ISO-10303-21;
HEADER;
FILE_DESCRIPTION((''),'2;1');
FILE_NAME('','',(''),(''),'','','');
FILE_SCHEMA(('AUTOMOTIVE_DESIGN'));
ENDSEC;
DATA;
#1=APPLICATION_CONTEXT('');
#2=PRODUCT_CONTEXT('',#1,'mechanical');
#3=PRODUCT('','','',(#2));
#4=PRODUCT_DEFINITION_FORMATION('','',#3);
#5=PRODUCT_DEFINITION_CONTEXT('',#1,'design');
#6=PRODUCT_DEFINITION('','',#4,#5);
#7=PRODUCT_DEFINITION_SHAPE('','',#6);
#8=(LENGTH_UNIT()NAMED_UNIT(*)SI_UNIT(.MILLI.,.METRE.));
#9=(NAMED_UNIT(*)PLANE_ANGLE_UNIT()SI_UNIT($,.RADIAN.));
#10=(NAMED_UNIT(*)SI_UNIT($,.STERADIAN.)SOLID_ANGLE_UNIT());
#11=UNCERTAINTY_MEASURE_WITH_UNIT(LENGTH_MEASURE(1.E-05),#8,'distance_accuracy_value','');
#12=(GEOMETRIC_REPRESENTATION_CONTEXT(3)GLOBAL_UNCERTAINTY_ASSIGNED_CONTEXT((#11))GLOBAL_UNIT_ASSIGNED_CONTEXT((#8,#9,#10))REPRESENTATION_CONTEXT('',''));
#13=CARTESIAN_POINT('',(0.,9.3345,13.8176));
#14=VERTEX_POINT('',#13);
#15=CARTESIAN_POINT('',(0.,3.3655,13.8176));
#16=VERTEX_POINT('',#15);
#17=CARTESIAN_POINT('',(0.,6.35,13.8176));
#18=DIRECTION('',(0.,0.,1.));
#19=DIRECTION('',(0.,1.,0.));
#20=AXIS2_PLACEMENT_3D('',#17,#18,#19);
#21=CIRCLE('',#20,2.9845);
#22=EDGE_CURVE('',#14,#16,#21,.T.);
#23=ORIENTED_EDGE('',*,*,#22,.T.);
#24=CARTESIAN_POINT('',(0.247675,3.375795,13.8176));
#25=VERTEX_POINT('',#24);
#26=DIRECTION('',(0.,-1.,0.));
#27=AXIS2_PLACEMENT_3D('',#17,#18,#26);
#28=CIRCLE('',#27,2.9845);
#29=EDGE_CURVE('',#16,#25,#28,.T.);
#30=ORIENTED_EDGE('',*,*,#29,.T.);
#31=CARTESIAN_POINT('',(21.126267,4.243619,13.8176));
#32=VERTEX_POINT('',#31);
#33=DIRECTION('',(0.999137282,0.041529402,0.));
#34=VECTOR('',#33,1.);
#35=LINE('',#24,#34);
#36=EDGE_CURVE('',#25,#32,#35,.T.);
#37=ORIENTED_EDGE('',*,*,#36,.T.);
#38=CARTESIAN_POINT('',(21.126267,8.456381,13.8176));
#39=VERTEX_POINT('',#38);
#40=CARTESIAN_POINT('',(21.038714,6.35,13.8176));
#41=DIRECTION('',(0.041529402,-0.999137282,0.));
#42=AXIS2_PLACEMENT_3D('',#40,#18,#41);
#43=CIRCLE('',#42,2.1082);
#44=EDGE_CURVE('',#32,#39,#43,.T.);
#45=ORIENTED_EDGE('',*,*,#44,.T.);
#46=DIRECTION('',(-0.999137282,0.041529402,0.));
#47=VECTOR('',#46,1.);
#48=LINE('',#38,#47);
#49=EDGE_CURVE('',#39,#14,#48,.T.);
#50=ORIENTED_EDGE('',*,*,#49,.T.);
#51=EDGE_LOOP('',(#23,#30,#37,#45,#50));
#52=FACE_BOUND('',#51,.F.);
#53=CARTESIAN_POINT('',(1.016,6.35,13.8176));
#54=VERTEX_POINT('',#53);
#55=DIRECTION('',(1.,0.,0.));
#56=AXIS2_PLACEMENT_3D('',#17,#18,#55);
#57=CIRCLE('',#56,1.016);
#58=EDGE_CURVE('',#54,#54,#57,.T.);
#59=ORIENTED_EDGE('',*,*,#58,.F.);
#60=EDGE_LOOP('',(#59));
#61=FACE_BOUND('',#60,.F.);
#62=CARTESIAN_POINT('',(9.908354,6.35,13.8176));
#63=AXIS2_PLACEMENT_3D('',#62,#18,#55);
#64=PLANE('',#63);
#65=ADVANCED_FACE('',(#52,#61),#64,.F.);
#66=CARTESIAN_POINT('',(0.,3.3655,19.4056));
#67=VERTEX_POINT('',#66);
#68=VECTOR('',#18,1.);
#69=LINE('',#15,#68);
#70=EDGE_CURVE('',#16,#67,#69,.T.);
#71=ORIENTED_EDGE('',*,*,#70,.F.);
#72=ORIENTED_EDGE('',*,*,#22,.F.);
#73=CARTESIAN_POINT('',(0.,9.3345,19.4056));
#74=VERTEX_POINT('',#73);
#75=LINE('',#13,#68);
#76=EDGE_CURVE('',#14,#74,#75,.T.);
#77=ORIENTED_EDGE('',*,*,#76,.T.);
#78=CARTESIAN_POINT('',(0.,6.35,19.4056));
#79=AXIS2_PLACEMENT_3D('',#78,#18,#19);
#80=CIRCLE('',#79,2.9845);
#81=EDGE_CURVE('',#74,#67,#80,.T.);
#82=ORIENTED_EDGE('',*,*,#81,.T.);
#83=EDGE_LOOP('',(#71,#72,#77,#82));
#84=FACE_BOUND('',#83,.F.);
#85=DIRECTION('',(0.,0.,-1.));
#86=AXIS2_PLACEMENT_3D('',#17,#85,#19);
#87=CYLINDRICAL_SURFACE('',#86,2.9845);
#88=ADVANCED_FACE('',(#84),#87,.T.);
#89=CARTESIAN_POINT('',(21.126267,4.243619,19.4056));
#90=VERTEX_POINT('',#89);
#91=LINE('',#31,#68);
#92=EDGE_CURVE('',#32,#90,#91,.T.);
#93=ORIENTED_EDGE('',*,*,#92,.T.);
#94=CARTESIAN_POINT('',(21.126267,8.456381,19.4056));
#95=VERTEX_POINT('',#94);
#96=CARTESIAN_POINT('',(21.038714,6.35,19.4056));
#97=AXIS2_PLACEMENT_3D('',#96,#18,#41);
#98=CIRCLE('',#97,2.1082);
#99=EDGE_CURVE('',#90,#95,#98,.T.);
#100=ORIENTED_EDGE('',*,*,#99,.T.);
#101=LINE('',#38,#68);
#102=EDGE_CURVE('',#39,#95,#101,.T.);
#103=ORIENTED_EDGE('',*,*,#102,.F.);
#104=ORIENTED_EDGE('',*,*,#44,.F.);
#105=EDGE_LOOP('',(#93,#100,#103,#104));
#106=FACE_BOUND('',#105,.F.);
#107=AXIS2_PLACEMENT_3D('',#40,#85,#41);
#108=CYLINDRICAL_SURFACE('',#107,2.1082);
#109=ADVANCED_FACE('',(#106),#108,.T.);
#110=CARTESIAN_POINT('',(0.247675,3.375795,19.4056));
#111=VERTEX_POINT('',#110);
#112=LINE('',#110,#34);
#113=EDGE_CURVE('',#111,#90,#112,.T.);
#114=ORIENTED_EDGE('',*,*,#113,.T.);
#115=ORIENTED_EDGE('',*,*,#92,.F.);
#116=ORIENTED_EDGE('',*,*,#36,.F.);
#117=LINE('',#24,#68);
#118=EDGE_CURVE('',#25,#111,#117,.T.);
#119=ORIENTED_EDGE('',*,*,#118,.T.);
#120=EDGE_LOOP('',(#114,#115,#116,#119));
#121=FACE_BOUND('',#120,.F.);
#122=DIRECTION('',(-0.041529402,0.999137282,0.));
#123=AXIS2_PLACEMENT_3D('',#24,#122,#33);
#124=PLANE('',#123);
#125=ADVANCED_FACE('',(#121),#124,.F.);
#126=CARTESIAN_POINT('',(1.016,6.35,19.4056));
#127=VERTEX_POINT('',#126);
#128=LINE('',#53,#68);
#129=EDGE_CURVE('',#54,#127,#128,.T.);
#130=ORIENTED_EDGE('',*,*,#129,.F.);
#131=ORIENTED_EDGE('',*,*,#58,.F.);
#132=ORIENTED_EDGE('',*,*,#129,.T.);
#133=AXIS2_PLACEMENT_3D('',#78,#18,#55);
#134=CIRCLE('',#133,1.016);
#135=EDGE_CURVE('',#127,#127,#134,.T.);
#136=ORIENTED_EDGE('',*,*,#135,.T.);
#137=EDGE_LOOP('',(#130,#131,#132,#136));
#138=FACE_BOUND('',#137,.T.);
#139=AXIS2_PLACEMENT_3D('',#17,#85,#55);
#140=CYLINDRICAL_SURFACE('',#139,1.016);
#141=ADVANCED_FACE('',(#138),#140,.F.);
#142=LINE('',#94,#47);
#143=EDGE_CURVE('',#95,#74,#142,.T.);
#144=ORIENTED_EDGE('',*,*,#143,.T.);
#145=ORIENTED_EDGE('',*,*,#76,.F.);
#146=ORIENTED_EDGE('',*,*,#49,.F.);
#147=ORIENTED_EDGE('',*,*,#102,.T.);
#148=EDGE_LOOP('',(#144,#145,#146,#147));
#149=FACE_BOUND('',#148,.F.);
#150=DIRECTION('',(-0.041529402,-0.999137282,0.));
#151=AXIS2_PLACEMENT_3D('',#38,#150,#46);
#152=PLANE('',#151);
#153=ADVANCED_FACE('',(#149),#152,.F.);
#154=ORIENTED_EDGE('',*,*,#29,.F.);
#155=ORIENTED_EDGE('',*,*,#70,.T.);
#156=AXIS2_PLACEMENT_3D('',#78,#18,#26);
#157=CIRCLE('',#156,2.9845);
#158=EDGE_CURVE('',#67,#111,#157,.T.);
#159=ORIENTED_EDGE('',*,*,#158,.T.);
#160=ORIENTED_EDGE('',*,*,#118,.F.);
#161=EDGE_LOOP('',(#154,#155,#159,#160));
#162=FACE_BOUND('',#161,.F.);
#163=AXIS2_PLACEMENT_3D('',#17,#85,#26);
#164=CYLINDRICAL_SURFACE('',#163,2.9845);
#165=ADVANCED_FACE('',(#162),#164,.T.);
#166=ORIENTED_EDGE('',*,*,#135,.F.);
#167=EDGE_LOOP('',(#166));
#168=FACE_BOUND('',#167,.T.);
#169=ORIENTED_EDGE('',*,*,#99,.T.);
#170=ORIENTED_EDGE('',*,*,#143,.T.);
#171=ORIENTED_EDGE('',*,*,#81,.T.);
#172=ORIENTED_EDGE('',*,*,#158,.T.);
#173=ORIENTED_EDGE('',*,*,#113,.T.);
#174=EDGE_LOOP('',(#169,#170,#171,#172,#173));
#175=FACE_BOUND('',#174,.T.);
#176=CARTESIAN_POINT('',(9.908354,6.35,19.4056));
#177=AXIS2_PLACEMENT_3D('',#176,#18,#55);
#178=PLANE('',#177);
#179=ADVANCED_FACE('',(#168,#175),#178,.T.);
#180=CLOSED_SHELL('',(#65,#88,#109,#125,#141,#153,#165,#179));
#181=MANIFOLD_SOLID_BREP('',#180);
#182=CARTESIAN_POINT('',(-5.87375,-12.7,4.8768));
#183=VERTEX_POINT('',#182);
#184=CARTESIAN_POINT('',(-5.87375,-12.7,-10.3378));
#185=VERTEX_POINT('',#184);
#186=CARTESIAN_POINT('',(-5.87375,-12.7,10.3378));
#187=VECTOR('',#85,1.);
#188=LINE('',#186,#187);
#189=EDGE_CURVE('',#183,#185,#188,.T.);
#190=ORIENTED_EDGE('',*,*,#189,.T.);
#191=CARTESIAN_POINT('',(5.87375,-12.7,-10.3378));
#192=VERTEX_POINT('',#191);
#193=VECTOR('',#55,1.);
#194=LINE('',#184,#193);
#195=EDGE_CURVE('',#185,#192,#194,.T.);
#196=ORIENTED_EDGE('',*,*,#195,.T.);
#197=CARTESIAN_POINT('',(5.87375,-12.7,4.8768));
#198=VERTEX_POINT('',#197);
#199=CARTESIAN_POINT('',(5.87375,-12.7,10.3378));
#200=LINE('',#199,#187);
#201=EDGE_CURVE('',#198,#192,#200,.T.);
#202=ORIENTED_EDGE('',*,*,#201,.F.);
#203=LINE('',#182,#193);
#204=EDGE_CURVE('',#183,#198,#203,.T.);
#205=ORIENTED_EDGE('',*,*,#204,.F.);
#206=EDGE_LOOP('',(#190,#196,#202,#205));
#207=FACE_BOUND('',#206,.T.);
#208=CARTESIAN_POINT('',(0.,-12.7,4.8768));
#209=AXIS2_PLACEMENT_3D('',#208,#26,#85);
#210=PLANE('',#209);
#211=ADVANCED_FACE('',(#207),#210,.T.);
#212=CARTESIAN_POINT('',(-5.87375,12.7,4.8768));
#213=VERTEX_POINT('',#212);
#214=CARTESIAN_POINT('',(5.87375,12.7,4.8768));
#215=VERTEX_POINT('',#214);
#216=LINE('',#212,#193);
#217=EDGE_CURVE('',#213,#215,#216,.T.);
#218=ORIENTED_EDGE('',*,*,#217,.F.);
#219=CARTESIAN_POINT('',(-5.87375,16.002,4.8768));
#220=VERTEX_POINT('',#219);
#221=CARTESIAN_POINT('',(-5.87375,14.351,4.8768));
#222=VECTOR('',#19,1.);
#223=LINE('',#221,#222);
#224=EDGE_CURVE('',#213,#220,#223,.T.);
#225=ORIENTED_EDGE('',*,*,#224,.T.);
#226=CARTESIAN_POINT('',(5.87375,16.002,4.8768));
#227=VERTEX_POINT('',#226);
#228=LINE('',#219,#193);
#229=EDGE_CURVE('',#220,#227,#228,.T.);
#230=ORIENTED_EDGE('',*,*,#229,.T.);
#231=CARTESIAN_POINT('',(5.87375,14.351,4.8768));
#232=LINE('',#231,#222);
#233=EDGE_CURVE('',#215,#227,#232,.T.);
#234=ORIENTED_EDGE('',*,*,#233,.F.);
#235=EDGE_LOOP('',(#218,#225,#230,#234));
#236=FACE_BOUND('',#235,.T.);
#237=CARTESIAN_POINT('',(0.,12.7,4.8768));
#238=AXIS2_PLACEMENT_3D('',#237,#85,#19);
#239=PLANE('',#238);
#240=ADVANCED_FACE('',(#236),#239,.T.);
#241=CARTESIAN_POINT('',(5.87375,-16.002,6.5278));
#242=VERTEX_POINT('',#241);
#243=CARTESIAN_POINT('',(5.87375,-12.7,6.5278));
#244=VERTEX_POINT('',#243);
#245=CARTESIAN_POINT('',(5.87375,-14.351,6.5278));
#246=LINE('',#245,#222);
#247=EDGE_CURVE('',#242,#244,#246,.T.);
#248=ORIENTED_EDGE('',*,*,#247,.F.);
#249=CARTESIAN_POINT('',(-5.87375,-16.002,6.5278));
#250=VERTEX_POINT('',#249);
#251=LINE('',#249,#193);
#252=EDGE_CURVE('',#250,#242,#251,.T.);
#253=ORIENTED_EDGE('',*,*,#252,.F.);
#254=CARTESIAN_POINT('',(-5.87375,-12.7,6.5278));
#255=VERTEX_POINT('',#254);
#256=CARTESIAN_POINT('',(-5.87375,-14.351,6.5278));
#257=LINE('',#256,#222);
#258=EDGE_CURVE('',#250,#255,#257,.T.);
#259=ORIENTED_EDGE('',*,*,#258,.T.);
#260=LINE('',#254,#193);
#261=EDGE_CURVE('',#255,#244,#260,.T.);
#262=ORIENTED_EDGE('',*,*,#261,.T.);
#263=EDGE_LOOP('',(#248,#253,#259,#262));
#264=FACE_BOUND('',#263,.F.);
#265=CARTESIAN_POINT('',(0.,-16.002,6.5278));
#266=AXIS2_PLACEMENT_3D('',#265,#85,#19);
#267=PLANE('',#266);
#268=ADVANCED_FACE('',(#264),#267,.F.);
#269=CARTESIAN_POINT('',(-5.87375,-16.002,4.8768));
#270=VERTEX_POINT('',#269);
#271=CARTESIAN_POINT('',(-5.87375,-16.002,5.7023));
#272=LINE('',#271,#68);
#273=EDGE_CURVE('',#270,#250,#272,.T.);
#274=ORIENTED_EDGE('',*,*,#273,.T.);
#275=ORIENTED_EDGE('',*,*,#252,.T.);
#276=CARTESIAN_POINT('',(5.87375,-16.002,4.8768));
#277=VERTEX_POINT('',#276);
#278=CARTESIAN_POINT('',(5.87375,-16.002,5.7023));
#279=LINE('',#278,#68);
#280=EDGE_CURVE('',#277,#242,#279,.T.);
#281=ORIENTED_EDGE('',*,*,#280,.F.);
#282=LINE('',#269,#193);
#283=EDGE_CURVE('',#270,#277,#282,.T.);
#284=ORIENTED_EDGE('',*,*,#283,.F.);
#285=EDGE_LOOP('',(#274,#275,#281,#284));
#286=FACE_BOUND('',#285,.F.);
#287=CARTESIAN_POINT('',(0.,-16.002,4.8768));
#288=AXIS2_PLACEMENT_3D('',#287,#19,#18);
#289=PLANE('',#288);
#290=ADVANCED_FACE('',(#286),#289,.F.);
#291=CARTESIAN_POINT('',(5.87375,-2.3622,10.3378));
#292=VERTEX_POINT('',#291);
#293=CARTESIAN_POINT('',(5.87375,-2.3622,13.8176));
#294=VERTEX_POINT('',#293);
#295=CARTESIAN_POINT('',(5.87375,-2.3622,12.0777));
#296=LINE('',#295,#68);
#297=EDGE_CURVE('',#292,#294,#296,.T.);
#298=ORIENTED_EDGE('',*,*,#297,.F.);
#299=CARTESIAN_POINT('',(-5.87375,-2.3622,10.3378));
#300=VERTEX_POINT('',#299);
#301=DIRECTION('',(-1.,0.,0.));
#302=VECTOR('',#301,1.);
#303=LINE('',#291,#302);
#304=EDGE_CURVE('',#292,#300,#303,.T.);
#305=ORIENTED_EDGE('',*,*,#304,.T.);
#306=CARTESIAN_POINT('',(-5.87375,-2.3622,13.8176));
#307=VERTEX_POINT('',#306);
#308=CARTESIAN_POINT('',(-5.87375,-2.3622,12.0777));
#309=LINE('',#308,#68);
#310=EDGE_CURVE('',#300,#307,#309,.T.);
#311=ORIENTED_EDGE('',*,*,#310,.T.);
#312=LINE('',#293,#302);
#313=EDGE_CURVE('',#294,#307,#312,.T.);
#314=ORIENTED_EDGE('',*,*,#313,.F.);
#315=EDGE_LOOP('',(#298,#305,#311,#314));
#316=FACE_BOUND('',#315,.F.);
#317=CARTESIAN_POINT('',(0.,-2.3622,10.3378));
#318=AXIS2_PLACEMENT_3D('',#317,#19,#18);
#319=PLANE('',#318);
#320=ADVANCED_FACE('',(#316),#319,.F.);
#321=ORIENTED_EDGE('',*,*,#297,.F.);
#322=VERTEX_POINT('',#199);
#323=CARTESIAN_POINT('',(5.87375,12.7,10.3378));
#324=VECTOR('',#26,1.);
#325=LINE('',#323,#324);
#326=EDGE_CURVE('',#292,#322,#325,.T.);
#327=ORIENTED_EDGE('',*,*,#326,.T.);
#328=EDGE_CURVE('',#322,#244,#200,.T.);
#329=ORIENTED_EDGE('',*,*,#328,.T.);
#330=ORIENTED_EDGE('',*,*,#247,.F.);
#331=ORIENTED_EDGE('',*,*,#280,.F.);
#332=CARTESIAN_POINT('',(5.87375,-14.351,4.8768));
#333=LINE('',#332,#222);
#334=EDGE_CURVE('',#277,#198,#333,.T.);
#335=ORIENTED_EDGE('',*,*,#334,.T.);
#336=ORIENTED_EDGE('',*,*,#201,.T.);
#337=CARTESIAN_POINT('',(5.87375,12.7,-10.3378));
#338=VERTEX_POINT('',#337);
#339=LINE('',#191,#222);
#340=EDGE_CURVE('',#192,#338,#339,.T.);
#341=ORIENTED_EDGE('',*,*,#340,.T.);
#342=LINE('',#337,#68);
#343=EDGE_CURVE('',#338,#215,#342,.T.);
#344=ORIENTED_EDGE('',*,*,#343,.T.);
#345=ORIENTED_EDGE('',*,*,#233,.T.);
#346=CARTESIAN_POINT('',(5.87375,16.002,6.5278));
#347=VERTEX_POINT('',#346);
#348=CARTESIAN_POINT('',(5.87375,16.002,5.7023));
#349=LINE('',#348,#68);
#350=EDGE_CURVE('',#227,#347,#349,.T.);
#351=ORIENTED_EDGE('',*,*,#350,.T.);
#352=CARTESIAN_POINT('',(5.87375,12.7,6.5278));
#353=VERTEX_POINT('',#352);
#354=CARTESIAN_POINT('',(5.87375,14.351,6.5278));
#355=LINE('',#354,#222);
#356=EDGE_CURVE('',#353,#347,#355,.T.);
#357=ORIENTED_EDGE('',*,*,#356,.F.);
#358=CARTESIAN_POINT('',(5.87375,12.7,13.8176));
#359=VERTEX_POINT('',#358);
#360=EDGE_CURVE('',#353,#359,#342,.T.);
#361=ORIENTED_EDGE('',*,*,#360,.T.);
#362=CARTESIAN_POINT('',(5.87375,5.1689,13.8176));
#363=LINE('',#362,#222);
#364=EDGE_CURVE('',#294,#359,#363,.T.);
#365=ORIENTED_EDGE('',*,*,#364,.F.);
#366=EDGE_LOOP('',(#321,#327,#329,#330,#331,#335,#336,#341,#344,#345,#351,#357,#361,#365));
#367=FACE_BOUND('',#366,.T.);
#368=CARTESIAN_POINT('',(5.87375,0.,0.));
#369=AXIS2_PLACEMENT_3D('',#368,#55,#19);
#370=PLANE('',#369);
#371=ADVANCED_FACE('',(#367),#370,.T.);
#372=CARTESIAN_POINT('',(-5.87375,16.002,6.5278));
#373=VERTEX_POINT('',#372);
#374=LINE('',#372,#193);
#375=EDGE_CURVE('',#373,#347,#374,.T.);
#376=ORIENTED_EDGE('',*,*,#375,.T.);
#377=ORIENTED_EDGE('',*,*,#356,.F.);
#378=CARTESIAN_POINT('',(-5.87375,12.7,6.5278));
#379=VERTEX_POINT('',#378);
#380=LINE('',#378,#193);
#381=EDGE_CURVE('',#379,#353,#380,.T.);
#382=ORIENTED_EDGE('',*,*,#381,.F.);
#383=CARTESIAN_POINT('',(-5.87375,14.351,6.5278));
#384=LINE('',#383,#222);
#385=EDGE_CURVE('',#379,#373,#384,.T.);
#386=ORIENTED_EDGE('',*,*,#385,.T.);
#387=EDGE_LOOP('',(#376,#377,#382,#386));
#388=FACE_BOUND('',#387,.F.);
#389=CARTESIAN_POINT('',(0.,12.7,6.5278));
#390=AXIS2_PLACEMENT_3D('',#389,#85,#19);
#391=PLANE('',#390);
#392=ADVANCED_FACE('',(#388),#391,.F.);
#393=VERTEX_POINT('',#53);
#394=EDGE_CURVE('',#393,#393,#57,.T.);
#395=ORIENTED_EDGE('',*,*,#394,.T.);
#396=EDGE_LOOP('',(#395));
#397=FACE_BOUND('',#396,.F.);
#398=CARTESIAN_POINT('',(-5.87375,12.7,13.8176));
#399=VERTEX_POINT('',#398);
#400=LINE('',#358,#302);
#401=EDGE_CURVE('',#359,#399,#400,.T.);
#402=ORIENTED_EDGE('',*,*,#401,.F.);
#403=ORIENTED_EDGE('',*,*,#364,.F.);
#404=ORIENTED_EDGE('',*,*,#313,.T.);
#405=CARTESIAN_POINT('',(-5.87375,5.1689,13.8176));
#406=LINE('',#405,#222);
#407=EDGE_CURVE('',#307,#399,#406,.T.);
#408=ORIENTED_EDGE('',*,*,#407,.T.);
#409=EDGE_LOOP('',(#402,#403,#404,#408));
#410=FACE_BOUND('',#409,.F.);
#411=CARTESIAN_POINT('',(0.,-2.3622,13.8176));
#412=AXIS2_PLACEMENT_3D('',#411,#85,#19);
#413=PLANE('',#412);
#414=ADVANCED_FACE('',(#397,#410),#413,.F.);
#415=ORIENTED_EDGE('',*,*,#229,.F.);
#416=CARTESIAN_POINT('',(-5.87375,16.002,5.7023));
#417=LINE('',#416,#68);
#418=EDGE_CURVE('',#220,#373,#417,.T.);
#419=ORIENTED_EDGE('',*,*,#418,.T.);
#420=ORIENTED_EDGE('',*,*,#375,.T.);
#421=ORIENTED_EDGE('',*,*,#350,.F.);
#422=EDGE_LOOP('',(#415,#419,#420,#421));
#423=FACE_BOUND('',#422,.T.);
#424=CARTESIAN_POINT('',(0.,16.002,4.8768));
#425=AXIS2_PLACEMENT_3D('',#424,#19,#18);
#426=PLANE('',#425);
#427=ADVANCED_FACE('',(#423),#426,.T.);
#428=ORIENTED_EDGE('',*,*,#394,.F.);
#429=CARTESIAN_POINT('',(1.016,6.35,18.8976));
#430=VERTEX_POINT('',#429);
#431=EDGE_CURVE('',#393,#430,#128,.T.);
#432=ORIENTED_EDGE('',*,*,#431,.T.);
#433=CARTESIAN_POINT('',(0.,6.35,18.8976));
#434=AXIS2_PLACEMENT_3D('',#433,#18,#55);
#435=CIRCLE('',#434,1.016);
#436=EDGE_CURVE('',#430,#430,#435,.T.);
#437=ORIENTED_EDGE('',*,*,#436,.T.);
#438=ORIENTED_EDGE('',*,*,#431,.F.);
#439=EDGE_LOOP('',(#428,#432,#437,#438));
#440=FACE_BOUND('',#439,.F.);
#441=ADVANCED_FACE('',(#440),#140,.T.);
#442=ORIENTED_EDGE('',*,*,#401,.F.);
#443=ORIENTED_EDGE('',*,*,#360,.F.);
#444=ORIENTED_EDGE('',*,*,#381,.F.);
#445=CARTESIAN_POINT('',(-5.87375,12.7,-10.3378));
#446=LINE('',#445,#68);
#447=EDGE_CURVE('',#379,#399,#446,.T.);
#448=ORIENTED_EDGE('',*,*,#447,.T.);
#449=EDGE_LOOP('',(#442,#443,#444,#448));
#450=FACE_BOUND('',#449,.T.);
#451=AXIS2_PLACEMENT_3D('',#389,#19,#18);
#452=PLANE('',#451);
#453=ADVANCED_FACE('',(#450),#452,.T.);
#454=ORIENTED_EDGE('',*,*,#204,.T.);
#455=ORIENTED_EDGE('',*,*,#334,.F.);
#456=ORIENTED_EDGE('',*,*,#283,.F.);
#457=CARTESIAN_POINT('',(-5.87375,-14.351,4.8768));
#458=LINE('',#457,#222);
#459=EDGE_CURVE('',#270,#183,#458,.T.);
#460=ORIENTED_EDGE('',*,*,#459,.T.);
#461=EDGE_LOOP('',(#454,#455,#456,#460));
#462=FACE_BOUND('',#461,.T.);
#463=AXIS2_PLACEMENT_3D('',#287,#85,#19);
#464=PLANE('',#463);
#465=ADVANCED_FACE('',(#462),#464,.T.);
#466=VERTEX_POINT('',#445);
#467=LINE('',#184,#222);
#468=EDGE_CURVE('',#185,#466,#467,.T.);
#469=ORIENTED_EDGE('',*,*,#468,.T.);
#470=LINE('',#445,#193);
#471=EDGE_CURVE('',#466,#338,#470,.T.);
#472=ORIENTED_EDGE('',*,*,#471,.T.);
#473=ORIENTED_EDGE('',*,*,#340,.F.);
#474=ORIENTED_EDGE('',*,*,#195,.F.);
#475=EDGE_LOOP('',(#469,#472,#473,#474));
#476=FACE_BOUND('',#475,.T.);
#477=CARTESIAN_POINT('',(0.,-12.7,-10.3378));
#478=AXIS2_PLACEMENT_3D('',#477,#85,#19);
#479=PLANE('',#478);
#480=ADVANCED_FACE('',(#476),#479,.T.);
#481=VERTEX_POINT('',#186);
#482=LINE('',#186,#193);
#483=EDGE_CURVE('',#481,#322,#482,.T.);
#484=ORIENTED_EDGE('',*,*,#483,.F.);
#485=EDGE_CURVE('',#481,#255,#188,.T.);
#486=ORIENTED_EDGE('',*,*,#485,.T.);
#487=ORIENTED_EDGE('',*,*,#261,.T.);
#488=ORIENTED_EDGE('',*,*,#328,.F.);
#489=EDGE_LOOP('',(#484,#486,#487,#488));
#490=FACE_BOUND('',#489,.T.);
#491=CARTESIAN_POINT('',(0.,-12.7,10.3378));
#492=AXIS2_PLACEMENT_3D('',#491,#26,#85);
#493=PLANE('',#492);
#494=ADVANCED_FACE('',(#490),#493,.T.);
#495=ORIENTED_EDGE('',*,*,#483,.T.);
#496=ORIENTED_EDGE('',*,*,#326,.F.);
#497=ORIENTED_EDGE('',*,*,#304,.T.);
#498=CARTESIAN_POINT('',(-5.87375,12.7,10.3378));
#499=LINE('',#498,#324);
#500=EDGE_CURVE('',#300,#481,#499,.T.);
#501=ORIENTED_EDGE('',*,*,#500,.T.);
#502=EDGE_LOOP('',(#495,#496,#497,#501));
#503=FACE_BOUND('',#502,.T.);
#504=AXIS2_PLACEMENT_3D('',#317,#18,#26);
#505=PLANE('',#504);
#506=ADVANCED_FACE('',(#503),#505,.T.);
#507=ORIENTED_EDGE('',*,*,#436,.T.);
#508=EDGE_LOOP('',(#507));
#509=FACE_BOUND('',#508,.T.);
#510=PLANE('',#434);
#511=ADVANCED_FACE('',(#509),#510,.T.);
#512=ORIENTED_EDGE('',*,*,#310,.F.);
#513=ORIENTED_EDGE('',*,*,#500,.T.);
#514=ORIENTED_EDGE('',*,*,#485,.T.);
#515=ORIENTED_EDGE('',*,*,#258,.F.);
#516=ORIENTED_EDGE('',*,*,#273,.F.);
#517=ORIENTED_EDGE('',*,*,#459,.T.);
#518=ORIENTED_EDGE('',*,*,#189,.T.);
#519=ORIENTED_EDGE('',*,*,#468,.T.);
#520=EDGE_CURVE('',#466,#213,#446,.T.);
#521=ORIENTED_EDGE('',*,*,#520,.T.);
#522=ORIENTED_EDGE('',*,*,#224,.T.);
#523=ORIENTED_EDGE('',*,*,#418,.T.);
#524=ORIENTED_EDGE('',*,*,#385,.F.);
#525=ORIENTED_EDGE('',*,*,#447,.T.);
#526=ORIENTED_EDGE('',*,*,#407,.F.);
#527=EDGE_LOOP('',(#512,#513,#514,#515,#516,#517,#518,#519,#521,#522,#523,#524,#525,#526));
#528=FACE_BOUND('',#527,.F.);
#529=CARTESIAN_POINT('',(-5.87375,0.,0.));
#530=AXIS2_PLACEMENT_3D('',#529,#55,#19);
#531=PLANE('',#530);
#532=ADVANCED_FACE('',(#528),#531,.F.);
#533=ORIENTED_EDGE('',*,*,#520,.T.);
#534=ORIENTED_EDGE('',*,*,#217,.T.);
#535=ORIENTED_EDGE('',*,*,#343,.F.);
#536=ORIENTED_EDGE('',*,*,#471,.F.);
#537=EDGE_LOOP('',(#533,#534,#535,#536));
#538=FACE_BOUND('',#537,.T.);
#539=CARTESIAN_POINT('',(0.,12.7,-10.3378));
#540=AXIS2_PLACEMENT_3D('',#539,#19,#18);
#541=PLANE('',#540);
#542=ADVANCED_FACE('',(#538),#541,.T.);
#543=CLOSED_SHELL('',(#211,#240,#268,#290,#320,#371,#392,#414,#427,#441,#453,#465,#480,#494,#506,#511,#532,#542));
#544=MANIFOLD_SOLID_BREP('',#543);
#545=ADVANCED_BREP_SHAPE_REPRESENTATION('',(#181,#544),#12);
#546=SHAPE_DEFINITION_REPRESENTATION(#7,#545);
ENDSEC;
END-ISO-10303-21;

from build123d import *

# Parameters (mm, degrees)
F0_W     = 3.302
F0_H     = 1.651
F0_W_2   = 15.0622
F0_H_2   = 3.4798
F1_DEPTH = 5.87375
F2_R     = 1.016
F3_DEPTH = 5.588
F4_DEPTH = 5.08


with BuildPart() as f1:
    # F0 (on Right) → F1 (new body, symmetric)
    with BuildSketch(Plane.YZ):
        Polygon((12.7, 6.5278), (12.7, 10.3378), (-2.3622, 10.3378), (-12.7, 10.3378), (-12.7, 6.5278), (-12.7, 4.8768), (-12.7, -10.3378), (12.7, -10.3378), (12.7, 4.8768), align=None)
        with Locations((-14.351, 5.7023)):
            Rectangle(F0_W, F0_H)
        with Locations((5.1689, 12.0777)):
            Rectangle(F0_W_2, F0_H_2)
        with Locations((14.351, 5.7023)):
            Rectangle(F0_W, F0_H)
    extrude(amount=F1_DEPTH, both=True)

    # F2 (on face) → F4 (join)
    with BuildSketch(Plane.XY.offset(13.8176)):
        with Locations((0, 6.35)):
            Circle(F2_R)
    extrude(amount=F4_DEPTH)


with BuildPart() as f3:
    # F2 (on face) → F3 (new body)
    with BuildSketch(Plane.XY.offset(13.8176)):
        with BuildLine():
            Line((21.1262666217, 8.4563812185), (0, 9.3345))
            ThreePointArc((0, 9.3345), (-2.9845, 6.35), (0, 3.3655))
            Line((0, 3.3655), (0.2476751405, 3.3757946818))
            Line((0.2476751405, 3.3757946818), (21.1262666217, 4.2436187815))
            ThreePointArc((21.1262666217, 4.2436187815), (23.146914337, 6.35), (21.1262666217, 8.4563812185))
        make_face()
        with Locations((0, 6.35)):
            Circle(F2_R, mode=Mode.SUBTRACT)
        with BuildLine():
            Line((0.2476751405, 3.3757946818), (0, 3.3655))
            ThreePointArc((0, 3.3655), (0.1239444994, 3.3680747811), (0.2476751405, 3.3757946818))
        make_face()
    extrude(amount=F3_DEPTH)


solid = Compound([f1.part, f3.part])
